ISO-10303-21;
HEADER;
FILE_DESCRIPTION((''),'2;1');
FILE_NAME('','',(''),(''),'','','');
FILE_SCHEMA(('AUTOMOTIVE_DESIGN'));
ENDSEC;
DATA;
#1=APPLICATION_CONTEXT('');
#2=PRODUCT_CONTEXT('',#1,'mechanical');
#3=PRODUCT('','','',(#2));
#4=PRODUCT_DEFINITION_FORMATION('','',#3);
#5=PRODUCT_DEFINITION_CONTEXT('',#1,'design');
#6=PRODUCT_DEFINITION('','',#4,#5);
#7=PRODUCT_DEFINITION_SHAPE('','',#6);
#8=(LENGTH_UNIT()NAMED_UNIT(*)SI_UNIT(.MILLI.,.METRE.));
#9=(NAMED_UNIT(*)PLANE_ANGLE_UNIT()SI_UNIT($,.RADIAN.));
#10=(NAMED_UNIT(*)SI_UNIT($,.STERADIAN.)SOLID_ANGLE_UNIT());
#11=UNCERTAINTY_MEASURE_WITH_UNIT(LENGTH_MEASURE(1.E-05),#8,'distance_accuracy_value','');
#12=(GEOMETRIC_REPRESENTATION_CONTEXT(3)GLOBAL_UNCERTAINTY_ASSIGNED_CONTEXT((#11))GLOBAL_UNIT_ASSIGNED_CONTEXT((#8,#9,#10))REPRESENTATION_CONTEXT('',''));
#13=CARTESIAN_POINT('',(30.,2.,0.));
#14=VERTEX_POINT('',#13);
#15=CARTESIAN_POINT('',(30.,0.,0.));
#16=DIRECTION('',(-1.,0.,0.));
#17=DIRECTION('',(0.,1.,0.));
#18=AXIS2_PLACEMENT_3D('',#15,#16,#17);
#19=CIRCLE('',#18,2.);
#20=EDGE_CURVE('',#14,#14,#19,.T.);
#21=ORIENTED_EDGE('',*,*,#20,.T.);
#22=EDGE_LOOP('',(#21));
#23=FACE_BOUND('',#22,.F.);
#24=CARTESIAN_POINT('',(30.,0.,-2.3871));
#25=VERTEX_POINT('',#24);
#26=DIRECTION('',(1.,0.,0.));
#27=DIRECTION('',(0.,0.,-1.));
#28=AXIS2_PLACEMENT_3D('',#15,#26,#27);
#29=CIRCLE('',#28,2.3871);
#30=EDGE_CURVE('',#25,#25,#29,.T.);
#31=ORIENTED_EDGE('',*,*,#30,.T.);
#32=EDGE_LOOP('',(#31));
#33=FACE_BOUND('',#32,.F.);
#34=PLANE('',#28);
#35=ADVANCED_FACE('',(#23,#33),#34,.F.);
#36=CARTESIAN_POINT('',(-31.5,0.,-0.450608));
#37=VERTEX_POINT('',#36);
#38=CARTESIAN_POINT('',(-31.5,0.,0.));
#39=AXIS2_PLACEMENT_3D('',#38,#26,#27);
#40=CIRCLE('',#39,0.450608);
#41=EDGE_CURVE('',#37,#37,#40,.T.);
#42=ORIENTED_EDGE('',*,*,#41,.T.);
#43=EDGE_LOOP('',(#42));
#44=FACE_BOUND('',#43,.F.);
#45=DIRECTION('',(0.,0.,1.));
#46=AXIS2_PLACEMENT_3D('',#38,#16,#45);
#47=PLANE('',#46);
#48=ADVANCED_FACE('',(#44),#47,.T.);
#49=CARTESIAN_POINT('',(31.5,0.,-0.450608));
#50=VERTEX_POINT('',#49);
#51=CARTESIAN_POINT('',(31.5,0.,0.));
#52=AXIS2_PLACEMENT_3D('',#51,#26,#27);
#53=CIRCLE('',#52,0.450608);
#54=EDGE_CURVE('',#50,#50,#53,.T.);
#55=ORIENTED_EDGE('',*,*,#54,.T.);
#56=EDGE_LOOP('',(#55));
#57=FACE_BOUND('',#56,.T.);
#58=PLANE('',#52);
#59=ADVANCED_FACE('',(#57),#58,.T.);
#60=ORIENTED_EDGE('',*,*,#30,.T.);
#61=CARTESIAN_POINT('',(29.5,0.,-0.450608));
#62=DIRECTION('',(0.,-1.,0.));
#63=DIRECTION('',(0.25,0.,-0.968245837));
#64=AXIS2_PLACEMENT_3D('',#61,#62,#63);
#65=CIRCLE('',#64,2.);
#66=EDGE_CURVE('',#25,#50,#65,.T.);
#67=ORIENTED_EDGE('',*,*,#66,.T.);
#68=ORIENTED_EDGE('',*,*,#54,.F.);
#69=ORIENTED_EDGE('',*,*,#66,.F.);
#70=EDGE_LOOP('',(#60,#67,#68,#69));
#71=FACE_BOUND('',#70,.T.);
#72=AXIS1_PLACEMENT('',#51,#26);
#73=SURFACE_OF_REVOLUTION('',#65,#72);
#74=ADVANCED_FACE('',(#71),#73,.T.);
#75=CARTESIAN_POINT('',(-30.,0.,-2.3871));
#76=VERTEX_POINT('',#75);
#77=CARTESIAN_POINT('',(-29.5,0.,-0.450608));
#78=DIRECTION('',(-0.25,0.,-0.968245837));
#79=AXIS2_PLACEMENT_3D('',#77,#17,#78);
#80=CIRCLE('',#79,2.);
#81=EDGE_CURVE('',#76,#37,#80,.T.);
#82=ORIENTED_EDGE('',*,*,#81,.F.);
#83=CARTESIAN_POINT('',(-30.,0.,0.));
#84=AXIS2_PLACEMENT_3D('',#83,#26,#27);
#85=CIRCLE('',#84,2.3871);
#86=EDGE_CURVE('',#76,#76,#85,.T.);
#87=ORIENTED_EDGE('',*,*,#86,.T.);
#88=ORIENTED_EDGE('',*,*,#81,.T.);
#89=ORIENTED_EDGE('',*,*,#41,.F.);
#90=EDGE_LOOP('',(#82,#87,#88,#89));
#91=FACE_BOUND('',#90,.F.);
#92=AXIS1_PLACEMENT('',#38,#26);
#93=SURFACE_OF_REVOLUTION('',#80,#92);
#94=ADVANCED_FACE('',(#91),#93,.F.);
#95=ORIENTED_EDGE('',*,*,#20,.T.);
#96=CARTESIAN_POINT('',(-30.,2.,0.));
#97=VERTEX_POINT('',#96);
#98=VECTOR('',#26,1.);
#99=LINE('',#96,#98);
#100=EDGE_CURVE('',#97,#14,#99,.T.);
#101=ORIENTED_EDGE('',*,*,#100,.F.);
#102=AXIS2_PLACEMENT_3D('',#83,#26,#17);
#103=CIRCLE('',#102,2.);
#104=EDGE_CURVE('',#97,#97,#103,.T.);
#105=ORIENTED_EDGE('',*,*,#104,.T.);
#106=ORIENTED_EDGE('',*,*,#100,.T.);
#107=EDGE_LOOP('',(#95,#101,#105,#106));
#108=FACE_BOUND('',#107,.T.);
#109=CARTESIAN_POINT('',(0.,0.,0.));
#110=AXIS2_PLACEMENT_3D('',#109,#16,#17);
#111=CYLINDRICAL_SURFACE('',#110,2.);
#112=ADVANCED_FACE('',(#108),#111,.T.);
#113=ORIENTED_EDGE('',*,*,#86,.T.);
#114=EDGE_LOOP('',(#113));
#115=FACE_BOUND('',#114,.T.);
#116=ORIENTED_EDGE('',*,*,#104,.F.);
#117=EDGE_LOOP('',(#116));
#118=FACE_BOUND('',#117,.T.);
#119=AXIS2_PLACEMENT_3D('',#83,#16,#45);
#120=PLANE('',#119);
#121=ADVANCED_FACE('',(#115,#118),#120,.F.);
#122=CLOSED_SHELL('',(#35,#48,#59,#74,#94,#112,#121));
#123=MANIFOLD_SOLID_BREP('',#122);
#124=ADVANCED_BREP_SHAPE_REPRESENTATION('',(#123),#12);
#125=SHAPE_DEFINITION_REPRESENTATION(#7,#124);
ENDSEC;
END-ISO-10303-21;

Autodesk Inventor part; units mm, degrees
ref_plane "YZ Plane" through (0, 0, 0) normal (1, 0, 0) x (0, 1, 0)
ref_plane "XZ Plane" through (0, 0, 0) normal (0, 1, 0) x (-1, 0, 0)
ref_plane "XY Plane" through (0, 0, 0) normal (0, 0, 1) x (1, 0, 0)
sketch "Sketch1" plane through (0, 0, 0) normal (1, 0, 0) x (0, 1, 0)
  circle A0 centre (0, 0) radius 2
  circle A1 centre (0, 0) radius 2.2361
  dimension "d0" = 4
extrude "Extrusion1" add sketch "Sketch1" along normal mid plane 63 contours A0
sketch "Sketch2" plane through (31.5, 0, 0) normal (1, 0, 0) x (0, 0, -1)
  circle A0 centre (0, 0) radius 2.3871
extrude "Extrusion2" add sketch "Sketch2" against normal blind 1.5
fillet "Fillet1" radius 2 1 edges at (31.5, 0, 2.3871)
mirror "Mirror1" about plane through (0, 0, 0) normal (1, 0, 0) of "Extrusion2", "Fillet1"
ref_plane "Work Plane1" through (0, 0, 0) normal (1, 0, 0) x (0, 1, 0)
properties part number "clampScrewHandle" material "Steel, Alloy"
